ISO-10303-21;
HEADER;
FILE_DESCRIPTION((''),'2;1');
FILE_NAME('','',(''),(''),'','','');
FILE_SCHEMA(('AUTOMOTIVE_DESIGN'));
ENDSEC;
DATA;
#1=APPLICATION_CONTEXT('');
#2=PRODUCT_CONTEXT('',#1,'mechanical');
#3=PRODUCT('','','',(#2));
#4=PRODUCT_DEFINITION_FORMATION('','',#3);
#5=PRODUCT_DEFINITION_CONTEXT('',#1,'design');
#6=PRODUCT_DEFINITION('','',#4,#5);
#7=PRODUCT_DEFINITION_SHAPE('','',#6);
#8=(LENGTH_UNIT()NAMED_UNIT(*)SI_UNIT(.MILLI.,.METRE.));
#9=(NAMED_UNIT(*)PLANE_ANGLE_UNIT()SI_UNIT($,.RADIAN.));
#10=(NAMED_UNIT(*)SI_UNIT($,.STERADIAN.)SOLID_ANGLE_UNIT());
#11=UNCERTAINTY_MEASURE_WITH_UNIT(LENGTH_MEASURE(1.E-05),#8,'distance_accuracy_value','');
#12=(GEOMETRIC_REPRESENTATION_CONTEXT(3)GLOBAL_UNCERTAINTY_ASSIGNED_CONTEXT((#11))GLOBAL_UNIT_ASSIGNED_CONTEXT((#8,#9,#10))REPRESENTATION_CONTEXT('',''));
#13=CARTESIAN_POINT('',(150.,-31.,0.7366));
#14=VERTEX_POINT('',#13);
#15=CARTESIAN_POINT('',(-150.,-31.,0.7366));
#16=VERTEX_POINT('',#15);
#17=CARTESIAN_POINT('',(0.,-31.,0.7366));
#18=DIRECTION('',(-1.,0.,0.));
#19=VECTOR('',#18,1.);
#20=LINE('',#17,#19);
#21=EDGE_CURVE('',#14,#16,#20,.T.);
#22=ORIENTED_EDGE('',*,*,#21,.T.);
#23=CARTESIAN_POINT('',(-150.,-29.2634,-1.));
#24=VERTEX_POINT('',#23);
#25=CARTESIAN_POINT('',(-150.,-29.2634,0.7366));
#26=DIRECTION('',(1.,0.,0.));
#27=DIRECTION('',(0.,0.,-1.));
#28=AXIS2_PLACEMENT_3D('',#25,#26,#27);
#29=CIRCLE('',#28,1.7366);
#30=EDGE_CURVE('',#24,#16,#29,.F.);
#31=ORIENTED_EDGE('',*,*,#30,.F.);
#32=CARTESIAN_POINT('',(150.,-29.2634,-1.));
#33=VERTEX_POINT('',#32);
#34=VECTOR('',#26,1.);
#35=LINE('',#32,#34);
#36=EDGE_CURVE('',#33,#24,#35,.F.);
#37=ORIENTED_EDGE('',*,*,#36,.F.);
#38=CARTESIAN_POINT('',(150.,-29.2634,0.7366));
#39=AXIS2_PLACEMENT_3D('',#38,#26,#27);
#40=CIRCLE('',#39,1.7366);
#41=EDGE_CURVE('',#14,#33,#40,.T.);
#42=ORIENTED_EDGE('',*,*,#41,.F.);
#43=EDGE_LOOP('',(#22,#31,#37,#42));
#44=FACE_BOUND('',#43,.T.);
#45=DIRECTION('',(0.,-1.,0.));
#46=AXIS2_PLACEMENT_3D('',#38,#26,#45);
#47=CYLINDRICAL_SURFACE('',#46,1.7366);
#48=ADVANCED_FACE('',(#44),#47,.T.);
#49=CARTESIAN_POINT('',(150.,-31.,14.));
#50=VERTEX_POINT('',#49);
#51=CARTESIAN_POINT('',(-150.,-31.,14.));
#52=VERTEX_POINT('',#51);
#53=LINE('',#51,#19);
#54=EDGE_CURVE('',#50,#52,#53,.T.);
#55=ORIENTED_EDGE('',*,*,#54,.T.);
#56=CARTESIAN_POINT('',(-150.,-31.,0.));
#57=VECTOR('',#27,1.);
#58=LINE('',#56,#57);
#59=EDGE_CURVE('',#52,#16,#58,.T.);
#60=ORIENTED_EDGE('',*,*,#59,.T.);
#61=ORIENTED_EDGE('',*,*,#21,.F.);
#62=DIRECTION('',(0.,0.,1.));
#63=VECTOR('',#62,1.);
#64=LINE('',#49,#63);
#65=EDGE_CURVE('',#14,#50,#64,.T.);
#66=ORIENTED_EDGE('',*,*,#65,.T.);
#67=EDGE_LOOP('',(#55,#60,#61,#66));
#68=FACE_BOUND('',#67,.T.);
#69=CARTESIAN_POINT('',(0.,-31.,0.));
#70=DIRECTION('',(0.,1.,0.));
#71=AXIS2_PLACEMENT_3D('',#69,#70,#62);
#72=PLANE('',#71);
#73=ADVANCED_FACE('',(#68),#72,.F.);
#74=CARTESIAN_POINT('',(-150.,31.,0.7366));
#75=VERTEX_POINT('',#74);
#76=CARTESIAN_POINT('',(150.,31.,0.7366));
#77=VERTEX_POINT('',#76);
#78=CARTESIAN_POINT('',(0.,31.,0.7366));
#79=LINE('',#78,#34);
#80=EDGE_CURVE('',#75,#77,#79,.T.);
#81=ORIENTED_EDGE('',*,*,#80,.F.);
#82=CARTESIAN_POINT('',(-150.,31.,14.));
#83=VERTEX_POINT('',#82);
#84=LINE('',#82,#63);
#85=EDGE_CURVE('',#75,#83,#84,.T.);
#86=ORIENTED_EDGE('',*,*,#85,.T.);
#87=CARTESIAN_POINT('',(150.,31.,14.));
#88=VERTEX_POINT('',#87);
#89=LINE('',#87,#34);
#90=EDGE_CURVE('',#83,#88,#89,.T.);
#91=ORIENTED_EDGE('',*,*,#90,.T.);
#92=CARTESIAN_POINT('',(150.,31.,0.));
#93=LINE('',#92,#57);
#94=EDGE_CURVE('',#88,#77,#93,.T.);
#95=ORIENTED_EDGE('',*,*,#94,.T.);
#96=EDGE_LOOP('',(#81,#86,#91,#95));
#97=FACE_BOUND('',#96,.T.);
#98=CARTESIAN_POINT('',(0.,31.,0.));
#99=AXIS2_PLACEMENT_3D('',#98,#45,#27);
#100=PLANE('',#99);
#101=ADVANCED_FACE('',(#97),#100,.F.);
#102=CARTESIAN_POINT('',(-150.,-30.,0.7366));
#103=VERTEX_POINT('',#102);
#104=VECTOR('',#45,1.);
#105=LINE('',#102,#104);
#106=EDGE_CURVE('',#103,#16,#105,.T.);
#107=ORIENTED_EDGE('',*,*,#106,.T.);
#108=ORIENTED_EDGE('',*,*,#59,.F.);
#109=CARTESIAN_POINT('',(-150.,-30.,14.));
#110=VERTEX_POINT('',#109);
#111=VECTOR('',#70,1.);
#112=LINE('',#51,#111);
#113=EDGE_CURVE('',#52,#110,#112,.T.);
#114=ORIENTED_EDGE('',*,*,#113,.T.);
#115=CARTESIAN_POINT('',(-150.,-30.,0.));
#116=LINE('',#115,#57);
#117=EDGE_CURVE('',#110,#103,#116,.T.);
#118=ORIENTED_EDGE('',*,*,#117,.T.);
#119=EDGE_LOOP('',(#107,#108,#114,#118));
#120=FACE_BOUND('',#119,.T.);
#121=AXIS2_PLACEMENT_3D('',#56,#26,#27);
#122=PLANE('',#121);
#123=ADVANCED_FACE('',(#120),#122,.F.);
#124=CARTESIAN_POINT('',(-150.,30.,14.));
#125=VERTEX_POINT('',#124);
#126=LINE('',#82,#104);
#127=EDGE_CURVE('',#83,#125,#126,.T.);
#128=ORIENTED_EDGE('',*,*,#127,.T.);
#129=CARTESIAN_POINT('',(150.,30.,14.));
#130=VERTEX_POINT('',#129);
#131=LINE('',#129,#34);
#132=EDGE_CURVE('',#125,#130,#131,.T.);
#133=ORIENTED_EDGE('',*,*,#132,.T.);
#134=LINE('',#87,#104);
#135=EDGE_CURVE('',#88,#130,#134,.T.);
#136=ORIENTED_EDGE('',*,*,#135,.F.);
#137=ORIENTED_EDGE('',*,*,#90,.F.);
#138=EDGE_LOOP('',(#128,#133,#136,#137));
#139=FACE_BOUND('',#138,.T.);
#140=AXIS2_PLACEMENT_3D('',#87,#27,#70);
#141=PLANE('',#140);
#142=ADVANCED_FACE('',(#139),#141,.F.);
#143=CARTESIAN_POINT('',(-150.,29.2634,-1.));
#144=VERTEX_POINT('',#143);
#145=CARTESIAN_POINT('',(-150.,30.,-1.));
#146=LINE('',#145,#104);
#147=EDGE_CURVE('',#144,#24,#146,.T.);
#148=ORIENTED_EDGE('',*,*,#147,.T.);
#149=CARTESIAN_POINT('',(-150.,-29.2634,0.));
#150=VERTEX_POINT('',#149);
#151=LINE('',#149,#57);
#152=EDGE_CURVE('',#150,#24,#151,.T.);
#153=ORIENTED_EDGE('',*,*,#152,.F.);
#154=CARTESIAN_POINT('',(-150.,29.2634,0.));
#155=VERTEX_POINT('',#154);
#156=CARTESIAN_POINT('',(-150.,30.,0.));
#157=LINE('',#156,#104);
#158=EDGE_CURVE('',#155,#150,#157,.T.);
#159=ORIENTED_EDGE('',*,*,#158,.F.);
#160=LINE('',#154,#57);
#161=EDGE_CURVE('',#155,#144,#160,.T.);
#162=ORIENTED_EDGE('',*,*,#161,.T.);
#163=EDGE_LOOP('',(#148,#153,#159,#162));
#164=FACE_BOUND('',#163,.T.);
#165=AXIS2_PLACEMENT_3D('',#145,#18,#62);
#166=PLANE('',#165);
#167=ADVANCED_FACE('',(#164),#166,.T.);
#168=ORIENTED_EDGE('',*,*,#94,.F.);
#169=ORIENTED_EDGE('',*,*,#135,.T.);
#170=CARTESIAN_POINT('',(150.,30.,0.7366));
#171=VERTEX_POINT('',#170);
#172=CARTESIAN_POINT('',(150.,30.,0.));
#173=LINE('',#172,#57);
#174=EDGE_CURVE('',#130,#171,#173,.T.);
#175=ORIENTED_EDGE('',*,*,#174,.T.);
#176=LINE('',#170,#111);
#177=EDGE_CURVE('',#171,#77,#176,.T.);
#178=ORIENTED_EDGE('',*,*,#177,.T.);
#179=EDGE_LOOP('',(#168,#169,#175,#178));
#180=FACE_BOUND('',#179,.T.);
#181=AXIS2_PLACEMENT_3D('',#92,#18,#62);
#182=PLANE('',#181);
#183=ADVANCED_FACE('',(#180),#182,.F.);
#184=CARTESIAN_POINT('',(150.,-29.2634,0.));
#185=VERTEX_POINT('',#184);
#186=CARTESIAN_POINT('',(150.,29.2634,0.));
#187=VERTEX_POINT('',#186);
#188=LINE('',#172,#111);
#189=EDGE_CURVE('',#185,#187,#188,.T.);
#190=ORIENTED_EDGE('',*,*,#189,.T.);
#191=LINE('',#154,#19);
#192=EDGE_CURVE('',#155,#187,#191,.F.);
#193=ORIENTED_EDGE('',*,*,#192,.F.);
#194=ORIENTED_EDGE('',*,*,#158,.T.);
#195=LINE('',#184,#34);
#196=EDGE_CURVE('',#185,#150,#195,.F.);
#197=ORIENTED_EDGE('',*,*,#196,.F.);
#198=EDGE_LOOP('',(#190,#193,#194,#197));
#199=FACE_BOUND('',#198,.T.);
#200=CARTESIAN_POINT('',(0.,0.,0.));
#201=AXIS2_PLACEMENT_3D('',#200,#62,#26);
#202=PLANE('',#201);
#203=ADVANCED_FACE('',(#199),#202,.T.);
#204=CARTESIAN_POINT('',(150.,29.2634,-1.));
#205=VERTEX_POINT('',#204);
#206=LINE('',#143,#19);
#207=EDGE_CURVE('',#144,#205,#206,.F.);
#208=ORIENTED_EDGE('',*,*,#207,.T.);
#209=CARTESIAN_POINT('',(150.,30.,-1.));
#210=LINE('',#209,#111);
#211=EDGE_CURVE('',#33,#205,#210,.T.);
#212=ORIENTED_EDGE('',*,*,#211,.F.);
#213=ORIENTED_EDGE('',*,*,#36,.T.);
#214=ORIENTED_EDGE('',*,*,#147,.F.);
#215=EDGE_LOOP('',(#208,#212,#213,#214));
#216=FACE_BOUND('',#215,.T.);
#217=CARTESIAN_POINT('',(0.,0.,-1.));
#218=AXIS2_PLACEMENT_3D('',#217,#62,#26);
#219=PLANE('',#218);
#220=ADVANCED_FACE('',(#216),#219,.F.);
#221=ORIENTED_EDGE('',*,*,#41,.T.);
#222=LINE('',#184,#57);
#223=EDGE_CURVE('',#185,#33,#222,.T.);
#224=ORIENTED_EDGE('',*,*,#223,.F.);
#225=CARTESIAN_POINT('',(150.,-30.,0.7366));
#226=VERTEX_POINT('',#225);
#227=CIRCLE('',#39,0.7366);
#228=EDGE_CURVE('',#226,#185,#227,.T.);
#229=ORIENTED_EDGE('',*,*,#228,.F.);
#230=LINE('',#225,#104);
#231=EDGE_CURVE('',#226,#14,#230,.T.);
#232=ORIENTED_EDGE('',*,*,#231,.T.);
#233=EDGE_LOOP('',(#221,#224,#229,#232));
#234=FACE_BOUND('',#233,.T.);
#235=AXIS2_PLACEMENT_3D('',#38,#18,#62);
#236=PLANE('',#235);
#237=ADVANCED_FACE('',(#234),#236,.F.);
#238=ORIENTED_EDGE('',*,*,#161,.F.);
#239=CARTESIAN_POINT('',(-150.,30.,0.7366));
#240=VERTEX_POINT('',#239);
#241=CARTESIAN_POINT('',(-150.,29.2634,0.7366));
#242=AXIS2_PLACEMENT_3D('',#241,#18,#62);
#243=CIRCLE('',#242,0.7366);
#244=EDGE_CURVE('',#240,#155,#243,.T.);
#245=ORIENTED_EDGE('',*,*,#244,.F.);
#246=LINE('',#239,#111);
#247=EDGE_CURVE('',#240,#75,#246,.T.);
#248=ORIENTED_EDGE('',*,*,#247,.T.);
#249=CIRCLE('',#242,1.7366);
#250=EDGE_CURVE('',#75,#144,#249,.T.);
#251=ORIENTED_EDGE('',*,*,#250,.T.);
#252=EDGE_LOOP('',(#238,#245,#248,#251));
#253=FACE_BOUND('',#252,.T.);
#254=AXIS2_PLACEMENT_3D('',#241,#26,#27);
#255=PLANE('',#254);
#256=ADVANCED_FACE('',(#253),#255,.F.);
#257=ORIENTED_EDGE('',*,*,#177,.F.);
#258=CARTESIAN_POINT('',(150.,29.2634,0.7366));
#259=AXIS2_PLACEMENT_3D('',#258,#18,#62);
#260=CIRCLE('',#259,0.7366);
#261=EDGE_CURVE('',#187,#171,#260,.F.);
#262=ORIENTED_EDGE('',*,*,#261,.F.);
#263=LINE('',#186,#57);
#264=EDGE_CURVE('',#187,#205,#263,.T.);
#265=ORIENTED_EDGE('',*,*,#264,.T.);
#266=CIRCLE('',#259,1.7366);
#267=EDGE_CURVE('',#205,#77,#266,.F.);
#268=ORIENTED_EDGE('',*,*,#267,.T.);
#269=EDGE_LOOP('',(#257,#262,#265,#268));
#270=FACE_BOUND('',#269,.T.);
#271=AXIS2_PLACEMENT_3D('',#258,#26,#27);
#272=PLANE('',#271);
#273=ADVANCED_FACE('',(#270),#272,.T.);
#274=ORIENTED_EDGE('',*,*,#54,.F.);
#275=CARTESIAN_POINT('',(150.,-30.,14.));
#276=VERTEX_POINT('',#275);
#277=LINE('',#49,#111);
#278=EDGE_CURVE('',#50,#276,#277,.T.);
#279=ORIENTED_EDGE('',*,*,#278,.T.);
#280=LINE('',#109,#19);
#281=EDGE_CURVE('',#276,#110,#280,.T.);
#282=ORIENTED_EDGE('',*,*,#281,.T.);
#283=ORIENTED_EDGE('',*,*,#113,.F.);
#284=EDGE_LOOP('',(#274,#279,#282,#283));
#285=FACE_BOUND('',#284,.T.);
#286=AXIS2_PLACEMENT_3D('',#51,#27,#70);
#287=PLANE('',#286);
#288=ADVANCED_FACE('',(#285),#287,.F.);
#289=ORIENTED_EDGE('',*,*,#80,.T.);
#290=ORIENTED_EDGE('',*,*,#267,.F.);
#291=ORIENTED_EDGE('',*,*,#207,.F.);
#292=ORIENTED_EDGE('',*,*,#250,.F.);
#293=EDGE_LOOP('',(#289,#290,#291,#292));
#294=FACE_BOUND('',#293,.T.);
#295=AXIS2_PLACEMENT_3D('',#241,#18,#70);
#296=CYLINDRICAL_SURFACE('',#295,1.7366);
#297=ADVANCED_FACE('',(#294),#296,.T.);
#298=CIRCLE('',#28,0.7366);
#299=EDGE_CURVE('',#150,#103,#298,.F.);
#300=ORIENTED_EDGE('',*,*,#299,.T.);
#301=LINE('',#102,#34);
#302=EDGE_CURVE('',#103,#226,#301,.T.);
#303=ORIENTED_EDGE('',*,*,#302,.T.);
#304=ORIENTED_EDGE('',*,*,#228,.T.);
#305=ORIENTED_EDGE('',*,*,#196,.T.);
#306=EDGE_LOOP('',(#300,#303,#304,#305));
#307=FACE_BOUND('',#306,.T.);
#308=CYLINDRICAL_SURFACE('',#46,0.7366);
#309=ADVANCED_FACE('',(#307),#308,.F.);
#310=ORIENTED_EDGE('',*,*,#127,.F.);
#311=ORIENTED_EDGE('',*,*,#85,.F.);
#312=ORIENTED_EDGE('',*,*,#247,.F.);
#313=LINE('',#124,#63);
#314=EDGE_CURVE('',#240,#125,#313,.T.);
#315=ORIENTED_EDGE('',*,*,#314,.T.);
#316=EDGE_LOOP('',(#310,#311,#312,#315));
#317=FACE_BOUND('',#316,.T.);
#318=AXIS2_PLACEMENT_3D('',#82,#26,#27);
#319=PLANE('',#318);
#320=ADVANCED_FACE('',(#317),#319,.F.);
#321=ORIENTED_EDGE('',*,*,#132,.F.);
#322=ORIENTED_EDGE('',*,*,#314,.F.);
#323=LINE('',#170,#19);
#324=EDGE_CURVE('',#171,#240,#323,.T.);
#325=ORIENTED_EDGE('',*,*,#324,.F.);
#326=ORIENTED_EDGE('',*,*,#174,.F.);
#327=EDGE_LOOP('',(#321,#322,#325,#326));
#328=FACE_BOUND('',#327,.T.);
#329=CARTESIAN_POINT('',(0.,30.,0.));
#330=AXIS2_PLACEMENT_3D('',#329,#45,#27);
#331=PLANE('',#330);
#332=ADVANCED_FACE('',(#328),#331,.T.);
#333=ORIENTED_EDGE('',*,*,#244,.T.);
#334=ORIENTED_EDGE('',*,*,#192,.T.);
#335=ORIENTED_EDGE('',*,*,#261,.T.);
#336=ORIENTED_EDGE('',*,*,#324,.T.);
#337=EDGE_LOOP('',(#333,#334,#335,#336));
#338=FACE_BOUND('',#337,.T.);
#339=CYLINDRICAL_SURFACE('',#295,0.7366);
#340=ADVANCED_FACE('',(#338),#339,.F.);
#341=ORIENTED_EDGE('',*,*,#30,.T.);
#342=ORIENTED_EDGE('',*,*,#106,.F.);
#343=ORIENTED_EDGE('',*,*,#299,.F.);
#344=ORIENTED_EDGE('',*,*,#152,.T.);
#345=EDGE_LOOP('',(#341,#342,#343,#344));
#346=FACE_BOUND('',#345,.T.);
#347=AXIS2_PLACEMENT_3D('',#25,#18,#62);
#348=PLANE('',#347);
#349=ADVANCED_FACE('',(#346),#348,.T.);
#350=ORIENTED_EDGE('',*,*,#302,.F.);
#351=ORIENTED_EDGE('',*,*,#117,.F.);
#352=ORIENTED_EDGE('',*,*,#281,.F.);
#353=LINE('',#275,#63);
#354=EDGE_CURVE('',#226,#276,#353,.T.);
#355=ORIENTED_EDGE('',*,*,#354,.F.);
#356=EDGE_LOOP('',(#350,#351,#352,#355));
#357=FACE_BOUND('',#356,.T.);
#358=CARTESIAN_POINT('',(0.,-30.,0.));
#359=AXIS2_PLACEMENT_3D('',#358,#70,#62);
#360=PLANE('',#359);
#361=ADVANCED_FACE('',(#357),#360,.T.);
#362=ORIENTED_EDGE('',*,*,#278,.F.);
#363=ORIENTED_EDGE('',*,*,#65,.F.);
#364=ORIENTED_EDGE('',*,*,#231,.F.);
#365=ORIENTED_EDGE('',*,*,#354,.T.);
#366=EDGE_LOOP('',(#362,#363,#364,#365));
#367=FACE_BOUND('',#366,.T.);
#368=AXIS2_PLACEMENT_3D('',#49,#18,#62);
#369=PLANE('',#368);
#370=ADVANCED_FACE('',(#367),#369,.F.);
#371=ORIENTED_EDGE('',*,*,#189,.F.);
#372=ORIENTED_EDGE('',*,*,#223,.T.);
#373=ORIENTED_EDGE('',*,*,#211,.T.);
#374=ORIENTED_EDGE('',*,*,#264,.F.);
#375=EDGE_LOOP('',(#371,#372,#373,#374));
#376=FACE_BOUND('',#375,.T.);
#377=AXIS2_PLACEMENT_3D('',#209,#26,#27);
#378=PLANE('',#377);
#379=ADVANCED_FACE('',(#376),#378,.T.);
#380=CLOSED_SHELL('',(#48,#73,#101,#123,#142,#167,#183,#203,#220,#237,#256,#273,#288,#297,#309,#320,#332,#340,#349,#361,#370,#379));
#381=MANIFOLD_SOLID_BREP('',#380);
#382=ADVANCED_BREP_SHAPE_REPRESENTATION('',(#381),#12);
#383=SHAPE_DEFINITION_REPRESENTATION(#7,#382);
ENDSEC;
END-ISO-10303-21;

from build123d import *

# Parameters (mm, degrees)
SKETCH1_W                      = 300
SKETCH1_H                      = 60
BASE_FLANGE1_DEPTH             = 1
EDGE_FLANGE1_STRIP_W           = 5.4732
EDGE_FLANGE1_STRIP_H           = 1
EDGE_FLANGE1_STRIP_CUT_DEPTH   = 300
EDGE_FLANGE1_STRIP_2_W         = 5.4732
EDGE_FLANGE1_STRIP_2_H         = 1
EDGE_FLANGE1_STRIP_CUT_2_DEPTH = 300
EDGE_FLANGE1_DEPTH             = 300
EDGE_FLANGE1_BEND_DEPTH        = 300


# Sheet-metal steps are written as plain solids
with BuildPart() as part:
    # Sketch1 → Base-Flange1 (new body)
    with BuildSketch(Plane.XY):
        Rectangle(SKETCH1_W, SKETCH1_H)
    extrude(amount=-BASE_FLANGE1_DEPTH)

    # Edge-Flange1 strip (across the edge) → Edge-Flange1 strip cut (cut)
    with BuildSketch(Plane(origin=(150, 30, 0), x_dir=(0, -1, 0), z_dir=(-1, 0, 0))):
        with Locations((-2, -0.5)):
            Rectangle(EDGE_FLANGE1_STRIP_W, EDGE_FLANGE1_STRIP_H)
    extrude(amount=EDGE_FLANGE1_STRIP_CUT_DEPTH, mode=Mode.SUBTRACT)

    # Edge-Flange1 strip 2 (across the edge) → Edge-Flange1 strip cut 2 (cut)
    with BuildSketch(Plane(origin=(-150, -30, 0), x_dir=(0, 1, 0), z_dir=(1, 0, 0))):
        with Locations((-2, -0.5)):
            Rectangle(EDGE_FLANGE1_STRIP_2_W, EDGE_FLANGE1_STRIP_2_H)
    extrude(amount=EDGE_FLANGE1_STRIP_CUT_2_DEPTH, mode=Mode.SUBTRACT)

    # Edge-Flange1 section (across the edge) → Edge-Flange1 (add)
    with BuildSketch(Plane(origin=(150, 30, 0), x_dir=(0, -1, 0), z_dir=(-1, 0, 0))):
        with BuildLine():
            Line((-1, 0.7366), (-1, 14))
            Line((-1, 14), (0, 14))
            Line((0, 14), (0, 0.7366))
            ThreePointArc((0, 0.7366), (0.215745145, 0.215745145), (0.7366, 0))
            Line((0.7366, 0), (0.7366, -1))
            ThreePointArc((0.7366, -1), (-0.491361636, -0.491361636), (-1, 0.7366))
        make_face()
    extrude(amount=EDGE_FLANGE1_DEPTH)

    # Edge-Flange1 section 2 (across the edge) → Edge-Flange1 bend (add)
    with BuildSketch(Plane(origin=(-150, -30, 0), x_dir=(0, 1, 0), z_dir=(1, 0, 0))):
        with BuildLine():
            Line((-1, 0.7366), (-1, 14))
            Line((-1, 14), (0, 14))
            Line((0, 14), (0, 0.7366))
            ThreePointArc((0, 0.7366), (0.215745145, 0.215745145), (0.7366, 0))
            Line((0.7366, 0), (0.7366, -1))
            ThreePointArc((0.7366, -1), (-0.491361636, -0.491361636), (-1, 0.7366))
        make_face()
    extrude(amount=EDGE_FLANGE1_BEND_DEPTH)


solid = part.part
